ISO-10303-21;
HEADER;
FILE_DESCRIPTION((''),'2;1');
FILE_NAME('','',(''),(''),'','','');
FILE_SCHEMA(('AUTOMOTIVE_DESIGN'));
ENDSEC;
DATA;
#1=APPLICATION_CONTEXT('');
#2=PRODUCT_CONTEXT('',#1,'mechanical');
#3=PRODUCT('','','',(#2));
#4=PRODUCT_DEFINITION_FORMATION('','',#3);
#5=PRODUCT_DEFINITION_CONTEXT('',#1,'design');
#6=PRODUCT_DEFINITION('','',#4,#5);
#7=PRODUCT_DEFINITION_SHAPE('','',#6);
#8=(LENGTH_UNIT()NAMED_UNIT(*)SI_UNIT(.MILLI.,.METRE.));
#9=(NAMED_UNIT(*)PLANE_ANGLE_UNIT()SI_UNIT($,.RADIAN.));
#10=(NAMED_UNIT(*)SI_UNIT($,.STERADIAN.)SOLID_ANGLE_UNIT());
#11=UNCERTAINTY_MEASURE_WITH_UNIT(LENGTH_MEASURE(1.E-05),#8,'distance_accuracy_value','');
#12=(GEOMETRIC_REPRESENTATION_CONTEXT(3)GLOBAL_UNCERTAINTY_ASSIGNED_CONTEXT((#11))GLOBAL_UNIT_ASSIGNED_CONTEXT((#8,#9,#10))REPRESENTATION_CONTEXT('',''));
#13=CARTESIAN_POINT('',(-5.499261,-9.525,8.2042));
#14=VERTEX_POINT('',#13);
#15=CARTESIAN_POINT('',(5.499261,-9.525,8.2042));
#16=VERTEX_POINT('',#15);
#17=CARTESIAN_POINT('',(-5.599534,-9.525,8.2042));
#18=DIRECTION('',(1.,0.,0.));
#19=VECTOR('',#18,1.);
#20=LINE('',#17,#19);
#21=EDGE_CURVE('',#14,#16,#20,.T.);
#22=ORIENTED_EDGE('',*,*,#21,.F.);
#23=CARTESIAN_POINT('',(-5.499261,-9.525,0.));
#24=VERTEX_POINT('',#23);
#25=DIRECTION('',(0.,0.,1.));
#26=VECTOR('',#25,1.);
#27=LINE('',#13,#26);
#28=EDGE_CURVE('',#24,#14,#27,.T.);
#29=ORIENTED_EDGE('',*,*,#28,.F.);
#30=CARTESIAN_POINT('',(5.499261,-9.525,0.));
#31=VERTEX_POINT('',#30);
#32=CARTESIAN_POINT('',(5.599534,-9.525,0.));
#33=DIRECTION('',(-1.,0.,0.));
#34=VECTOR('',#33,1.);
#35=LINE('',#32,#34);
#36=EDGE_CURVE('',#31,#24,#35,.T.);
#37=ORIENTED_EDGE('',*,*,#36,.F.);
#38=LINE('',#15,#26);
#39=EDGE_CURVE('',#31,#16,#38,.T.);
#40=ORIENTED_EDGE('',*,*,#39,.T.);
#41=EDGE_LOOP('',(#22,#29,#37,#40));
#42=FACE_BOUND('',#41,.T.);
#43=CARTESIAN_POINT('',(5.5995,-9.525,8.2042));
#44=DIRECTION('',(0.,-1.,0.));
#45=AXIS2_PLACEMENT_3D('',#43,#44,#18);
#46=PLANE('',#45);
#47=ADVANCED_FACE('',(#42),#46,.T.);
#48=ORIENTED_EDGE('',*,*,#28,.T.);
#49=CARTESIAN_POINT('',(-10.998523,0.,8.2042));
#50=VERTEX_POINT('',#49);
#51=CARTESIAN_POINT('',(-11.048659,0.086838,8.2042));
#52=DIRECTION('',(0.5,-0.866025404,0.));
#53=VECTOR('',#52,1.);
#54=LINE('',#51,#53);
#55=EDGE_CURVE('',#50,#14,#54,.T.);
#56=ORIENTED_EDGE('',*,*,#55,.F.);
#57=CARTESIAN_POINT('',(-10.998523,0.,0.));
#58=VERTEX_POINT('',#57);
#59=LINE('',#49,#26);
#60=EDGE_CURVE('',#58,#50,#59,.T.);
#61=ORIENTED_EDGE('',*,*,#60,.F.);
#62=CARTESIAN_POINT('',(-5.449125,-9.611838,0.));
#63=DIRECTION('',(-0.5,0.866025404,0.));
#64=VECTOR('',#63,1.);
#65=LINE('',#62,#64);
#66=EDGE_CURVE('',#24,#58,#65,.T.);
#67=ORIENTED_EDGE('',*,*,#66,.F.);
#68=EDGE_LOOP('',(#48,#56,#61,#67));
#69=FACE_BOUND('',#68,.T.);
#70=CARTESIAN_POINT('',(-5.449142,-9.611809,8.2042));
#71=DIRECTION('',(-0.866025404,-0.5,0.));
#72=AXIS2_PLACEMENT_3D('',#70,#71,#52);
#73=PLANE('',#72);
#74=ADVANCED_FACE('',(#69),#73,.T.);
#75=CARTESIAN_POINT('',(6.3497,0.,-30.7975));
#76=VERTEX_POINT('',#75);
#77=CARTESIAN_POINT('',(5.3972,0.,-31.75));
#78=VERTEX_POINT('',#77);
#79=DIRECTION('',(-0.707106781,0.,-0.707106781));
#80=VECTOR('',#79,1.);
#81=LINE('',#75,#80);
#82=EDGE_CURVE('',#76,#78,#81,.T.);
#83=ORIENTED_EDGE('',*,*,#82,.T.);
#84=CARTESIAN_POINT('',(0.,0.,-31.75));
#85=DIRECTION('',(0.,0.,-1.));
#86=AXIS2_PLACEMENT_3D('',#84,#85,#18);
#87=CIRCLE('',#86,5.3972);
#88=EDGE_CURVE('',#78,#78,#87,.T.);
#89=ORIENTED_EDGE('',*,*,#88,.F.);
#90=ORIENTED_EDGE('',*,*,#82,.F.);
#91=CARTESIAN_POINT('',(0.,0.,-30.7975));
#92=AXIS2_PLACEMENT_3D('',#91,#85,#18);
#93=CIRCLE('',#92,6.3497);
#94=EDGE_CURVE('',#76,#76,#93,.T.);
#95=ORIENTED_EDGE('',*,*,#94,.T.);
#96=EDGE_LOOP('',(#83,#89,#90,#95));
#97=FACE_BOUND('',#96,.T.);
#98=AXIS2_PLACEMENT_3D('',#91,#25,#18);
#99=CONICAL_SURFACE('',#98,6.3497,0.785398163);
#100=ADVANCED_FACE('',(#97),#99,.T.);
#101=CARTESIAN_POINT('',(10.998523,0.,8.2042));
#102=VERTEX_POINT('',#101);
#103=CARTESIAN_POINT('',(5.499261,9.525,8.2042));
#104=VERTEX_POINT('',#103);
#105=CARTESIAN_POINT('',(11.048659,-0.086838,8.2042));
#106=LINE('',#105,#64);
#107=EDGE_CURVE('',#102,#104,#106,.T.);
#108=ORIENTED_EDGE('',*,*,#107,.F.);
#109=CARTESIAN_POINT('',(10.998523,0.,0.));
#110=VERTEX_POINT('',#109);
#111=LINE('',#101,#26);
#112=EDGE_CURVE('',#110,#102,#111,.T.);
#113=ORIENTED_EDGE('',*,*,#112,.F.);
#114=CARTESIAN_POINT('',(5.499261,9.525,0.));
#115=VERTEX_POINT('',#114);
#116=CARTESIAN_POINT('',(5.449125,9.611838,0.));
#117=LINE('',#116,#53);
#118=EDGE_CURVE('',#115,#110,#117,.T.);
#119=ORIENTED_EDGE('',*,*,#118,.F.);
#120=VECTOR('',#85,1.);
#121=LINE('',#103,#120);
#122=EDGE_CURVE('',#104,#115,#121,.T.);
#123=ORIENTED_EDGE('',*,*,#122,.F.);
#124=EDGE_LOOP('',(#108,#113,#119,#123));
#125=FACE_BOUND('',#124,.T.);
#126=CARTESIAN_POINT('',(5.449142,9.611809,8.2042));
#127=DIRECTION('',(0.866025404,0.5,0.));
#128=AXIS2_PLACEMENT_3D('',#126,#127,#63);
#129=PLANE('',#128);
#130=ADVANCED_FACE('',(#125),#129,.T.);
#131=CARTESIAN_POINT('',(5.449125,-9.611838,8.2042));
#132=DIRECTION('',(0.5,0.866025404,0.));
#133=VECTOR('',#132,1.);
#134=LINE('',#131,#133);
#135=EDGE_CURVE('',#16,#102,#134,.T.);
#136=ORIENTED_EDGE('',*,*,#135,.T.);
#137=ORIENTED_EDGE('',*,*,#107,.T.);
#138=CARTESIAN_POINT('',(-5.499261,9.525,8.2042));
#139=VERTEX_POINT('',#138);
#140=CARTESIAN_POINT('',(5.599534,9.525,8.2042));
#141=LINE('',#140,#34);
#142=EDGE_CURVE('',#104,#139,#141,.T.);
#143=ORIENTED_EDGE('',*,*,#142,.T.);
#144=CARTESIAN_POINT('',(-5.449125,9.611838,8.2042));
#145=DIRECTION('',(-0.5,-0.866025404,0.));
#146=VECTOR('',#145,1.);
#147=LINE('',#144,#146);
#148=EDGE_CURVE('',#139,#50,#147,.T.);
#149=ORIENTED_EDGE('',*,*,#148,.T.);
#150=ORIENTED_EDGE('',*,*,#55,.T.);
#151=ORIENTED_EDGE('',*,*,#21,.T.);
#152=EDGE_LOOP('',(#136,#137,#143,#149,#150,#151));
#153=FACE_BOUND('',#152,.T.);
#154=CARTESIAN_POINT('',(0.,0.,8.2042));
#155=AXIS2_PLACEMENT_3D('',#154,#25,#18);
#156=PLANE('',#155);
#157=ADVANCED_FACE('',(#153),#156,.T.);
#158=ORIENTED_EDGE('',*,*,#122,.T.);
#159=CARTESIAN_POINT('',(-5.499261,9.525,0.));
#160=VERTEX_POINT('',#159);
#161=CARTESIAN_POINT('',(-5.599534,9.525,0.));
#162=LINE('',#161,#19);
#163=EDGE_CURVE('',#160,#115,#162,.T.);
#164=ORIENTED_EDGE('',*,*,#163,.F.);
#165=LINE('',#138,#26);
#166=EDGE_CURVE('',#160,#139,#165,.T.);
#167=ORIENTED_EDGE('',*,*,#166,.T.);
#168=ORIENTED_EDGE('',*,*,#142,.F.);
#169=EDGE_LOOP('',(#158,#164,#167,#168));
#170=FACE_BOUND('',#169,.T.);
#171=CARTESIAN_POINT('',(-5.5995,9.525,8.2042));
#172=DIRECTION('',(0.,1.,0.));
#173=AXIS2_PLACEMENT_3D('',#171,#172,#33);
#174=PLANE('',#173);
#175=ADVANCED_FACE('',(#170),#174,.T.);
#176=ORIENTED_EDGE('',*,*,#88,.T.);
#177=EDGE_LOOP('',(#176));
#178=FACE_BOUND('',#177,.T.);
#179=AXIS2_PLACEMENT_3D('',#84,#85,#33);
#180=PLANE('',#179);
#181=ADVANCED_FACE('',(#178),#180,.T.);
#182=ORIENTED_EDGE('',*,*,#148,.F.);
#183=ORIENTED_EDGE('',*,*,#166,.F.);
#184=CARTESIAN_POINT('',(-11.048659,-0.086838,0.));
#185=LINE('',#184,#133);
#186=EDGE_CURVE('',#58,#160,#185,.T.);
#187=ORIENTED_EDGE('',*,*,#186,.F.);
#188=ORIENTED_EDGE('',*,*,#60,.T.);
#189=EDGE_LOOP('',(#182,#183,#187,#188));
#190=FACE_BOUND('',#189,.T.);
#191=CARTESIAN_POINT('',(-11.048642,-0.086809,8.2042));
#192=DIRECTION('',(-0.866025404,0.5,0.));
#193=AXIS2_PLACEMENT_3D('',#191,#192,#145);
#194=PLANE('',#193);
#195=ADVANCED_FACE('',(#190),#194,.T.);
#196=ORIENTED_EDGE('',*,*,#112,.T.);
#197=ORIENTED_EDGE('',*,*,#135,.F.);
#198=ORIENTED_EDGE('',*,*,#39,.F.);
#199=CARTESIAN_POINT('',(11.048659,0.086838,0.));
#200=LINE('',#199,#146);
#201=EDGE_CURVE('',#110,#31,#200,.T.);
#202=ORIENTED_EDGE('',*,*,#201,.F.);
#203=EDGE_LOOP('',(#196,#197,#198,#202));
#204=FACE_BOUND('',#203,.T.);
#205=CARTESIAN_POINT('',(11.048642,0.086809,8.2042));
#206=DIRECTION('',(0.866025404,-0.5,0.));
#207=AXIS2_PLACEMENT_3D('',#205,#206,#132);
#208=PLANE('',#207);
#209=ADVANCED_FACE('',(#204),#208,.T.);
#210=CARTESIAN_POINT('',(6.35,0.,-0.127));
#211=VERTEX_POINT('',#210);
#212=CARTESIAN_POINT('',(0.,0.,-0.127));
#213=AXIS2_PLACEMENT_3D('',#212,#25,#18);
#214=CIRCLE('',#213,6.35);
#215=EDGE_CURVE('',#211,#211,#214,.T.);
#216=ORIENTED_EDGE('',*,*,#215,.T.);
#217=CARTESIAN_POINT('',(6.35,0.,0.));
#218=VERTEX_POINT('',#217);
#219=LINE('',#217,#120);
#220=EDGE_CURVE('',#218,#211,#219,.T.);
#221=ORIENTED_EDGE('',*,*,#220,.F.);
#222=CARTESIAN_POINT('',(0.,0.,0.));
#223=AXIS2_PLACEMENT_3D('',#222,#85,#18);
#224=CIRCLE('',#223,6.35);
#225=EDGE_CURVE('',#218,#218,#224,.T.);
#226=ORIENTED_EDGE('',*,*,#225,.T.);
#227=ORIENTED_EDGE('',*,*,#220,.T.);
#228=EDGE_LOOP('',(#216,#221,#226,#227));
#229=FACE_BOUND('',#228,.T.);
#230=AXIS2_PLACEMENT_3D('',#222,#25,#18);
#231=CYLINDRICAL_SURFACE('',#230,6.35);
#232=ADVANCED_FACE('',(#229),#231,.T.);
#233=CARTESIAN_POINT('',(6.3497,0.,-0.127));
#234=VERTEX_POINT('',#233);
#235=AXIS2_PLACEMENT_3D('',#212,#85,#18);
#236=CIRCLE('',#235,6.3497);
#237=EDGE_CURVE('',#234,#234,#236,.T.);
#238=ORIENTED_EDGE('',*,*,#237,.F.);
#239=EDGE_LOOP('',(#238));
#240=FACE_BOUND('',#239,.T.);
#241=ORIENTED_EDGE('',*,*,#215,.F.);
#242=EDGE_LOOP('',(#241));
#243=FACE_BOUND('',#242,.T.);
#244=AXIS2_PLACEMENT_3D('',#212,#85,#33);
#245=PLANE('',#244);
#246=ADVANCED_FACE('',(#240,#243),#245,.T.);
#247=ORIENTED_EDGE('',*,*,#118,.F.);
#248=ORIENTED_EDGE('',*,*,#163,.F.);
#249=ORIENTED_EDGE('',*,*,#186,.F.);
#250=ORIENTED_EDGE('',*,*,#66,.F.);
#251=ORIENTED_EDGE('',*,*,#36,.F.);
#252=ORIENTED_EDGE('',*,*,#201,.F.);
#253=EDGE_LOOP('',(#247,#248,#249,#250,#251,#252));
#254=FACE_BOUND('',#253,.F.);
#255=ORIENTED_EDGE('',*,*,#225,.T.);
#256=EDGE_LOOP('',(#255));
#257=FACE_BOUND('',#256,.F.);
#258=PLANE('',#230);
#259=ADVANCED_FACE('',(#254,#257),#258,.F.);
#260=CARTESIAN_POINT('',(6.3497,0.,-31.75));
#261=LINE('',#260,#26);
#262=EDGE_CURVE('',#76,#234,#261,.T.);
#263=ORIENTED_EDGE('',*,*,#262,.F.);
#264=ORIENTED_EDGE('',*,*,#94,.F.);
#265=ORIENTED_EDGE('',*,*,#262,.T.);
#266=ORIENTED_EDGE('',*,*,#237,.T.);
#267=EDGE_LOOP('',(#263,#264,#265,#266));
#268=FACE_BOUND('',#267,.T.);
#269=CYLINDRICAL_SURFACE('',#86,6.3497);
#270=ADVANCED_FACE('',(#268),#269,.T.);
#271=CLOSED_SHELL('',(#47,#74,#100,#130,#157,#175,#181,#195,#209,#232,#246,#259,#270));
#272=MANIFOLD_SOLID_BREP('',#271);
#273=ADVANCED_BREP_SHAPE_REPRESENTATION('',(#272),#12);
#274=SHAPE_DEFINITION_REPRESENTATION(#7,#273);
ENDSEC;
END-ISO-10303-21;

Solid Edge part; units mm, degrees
sketch "Sketch1" plane through (0, 0, 0) normal (0, 0, 1) x (1, 0, 0)
  circle A0 centre (0, 0) radius 11.049
  dimension "D1" = 22.098
extrude "Protrusion1" add sketch "Sketch1" along normal blind 8.2042
sketch "Sketch2" plane through (0, 0, 0) normal (0, 0, -1) x (1, 0, 0)
  circle A0 centre (0, 0) radius 6.35
extrude "Protrusion2" add sketch "Sketch2" along normal blind 31.75
sketch "Sketch3" plane through (0, 0, -31.75) normal (0, 0, -1) x (1, 0, 0)
  circle A0 centre (0, 0) radius 6.3497
extrude "Cutout1" cut sketch "Sketch3" against normal blind 31.623 flip side to cut
chamfer "Chamfer_1" distance 0.9525 angle 45 1 edges at (-6.3497, 0, -31.75)
sketch "Sketch4" plane through (0, 0, 8.2042) normal (0, 0, 1) x (1, 0, 0)
  line L0 (-5.5995, 9.525) -> (5.5995, 9.525)
  dimension "D1" = 19.05
extrude "Cutout2" cut sketch "Sketch4" against normal up to next material side at (0, 9.575, 8.2042)
pattern_circular "Pattern1" count 6 over 360 about axis through (0, 0, 8.2042) along (0, 0, 1) of "Cutout2"
properties part number "24102645"
